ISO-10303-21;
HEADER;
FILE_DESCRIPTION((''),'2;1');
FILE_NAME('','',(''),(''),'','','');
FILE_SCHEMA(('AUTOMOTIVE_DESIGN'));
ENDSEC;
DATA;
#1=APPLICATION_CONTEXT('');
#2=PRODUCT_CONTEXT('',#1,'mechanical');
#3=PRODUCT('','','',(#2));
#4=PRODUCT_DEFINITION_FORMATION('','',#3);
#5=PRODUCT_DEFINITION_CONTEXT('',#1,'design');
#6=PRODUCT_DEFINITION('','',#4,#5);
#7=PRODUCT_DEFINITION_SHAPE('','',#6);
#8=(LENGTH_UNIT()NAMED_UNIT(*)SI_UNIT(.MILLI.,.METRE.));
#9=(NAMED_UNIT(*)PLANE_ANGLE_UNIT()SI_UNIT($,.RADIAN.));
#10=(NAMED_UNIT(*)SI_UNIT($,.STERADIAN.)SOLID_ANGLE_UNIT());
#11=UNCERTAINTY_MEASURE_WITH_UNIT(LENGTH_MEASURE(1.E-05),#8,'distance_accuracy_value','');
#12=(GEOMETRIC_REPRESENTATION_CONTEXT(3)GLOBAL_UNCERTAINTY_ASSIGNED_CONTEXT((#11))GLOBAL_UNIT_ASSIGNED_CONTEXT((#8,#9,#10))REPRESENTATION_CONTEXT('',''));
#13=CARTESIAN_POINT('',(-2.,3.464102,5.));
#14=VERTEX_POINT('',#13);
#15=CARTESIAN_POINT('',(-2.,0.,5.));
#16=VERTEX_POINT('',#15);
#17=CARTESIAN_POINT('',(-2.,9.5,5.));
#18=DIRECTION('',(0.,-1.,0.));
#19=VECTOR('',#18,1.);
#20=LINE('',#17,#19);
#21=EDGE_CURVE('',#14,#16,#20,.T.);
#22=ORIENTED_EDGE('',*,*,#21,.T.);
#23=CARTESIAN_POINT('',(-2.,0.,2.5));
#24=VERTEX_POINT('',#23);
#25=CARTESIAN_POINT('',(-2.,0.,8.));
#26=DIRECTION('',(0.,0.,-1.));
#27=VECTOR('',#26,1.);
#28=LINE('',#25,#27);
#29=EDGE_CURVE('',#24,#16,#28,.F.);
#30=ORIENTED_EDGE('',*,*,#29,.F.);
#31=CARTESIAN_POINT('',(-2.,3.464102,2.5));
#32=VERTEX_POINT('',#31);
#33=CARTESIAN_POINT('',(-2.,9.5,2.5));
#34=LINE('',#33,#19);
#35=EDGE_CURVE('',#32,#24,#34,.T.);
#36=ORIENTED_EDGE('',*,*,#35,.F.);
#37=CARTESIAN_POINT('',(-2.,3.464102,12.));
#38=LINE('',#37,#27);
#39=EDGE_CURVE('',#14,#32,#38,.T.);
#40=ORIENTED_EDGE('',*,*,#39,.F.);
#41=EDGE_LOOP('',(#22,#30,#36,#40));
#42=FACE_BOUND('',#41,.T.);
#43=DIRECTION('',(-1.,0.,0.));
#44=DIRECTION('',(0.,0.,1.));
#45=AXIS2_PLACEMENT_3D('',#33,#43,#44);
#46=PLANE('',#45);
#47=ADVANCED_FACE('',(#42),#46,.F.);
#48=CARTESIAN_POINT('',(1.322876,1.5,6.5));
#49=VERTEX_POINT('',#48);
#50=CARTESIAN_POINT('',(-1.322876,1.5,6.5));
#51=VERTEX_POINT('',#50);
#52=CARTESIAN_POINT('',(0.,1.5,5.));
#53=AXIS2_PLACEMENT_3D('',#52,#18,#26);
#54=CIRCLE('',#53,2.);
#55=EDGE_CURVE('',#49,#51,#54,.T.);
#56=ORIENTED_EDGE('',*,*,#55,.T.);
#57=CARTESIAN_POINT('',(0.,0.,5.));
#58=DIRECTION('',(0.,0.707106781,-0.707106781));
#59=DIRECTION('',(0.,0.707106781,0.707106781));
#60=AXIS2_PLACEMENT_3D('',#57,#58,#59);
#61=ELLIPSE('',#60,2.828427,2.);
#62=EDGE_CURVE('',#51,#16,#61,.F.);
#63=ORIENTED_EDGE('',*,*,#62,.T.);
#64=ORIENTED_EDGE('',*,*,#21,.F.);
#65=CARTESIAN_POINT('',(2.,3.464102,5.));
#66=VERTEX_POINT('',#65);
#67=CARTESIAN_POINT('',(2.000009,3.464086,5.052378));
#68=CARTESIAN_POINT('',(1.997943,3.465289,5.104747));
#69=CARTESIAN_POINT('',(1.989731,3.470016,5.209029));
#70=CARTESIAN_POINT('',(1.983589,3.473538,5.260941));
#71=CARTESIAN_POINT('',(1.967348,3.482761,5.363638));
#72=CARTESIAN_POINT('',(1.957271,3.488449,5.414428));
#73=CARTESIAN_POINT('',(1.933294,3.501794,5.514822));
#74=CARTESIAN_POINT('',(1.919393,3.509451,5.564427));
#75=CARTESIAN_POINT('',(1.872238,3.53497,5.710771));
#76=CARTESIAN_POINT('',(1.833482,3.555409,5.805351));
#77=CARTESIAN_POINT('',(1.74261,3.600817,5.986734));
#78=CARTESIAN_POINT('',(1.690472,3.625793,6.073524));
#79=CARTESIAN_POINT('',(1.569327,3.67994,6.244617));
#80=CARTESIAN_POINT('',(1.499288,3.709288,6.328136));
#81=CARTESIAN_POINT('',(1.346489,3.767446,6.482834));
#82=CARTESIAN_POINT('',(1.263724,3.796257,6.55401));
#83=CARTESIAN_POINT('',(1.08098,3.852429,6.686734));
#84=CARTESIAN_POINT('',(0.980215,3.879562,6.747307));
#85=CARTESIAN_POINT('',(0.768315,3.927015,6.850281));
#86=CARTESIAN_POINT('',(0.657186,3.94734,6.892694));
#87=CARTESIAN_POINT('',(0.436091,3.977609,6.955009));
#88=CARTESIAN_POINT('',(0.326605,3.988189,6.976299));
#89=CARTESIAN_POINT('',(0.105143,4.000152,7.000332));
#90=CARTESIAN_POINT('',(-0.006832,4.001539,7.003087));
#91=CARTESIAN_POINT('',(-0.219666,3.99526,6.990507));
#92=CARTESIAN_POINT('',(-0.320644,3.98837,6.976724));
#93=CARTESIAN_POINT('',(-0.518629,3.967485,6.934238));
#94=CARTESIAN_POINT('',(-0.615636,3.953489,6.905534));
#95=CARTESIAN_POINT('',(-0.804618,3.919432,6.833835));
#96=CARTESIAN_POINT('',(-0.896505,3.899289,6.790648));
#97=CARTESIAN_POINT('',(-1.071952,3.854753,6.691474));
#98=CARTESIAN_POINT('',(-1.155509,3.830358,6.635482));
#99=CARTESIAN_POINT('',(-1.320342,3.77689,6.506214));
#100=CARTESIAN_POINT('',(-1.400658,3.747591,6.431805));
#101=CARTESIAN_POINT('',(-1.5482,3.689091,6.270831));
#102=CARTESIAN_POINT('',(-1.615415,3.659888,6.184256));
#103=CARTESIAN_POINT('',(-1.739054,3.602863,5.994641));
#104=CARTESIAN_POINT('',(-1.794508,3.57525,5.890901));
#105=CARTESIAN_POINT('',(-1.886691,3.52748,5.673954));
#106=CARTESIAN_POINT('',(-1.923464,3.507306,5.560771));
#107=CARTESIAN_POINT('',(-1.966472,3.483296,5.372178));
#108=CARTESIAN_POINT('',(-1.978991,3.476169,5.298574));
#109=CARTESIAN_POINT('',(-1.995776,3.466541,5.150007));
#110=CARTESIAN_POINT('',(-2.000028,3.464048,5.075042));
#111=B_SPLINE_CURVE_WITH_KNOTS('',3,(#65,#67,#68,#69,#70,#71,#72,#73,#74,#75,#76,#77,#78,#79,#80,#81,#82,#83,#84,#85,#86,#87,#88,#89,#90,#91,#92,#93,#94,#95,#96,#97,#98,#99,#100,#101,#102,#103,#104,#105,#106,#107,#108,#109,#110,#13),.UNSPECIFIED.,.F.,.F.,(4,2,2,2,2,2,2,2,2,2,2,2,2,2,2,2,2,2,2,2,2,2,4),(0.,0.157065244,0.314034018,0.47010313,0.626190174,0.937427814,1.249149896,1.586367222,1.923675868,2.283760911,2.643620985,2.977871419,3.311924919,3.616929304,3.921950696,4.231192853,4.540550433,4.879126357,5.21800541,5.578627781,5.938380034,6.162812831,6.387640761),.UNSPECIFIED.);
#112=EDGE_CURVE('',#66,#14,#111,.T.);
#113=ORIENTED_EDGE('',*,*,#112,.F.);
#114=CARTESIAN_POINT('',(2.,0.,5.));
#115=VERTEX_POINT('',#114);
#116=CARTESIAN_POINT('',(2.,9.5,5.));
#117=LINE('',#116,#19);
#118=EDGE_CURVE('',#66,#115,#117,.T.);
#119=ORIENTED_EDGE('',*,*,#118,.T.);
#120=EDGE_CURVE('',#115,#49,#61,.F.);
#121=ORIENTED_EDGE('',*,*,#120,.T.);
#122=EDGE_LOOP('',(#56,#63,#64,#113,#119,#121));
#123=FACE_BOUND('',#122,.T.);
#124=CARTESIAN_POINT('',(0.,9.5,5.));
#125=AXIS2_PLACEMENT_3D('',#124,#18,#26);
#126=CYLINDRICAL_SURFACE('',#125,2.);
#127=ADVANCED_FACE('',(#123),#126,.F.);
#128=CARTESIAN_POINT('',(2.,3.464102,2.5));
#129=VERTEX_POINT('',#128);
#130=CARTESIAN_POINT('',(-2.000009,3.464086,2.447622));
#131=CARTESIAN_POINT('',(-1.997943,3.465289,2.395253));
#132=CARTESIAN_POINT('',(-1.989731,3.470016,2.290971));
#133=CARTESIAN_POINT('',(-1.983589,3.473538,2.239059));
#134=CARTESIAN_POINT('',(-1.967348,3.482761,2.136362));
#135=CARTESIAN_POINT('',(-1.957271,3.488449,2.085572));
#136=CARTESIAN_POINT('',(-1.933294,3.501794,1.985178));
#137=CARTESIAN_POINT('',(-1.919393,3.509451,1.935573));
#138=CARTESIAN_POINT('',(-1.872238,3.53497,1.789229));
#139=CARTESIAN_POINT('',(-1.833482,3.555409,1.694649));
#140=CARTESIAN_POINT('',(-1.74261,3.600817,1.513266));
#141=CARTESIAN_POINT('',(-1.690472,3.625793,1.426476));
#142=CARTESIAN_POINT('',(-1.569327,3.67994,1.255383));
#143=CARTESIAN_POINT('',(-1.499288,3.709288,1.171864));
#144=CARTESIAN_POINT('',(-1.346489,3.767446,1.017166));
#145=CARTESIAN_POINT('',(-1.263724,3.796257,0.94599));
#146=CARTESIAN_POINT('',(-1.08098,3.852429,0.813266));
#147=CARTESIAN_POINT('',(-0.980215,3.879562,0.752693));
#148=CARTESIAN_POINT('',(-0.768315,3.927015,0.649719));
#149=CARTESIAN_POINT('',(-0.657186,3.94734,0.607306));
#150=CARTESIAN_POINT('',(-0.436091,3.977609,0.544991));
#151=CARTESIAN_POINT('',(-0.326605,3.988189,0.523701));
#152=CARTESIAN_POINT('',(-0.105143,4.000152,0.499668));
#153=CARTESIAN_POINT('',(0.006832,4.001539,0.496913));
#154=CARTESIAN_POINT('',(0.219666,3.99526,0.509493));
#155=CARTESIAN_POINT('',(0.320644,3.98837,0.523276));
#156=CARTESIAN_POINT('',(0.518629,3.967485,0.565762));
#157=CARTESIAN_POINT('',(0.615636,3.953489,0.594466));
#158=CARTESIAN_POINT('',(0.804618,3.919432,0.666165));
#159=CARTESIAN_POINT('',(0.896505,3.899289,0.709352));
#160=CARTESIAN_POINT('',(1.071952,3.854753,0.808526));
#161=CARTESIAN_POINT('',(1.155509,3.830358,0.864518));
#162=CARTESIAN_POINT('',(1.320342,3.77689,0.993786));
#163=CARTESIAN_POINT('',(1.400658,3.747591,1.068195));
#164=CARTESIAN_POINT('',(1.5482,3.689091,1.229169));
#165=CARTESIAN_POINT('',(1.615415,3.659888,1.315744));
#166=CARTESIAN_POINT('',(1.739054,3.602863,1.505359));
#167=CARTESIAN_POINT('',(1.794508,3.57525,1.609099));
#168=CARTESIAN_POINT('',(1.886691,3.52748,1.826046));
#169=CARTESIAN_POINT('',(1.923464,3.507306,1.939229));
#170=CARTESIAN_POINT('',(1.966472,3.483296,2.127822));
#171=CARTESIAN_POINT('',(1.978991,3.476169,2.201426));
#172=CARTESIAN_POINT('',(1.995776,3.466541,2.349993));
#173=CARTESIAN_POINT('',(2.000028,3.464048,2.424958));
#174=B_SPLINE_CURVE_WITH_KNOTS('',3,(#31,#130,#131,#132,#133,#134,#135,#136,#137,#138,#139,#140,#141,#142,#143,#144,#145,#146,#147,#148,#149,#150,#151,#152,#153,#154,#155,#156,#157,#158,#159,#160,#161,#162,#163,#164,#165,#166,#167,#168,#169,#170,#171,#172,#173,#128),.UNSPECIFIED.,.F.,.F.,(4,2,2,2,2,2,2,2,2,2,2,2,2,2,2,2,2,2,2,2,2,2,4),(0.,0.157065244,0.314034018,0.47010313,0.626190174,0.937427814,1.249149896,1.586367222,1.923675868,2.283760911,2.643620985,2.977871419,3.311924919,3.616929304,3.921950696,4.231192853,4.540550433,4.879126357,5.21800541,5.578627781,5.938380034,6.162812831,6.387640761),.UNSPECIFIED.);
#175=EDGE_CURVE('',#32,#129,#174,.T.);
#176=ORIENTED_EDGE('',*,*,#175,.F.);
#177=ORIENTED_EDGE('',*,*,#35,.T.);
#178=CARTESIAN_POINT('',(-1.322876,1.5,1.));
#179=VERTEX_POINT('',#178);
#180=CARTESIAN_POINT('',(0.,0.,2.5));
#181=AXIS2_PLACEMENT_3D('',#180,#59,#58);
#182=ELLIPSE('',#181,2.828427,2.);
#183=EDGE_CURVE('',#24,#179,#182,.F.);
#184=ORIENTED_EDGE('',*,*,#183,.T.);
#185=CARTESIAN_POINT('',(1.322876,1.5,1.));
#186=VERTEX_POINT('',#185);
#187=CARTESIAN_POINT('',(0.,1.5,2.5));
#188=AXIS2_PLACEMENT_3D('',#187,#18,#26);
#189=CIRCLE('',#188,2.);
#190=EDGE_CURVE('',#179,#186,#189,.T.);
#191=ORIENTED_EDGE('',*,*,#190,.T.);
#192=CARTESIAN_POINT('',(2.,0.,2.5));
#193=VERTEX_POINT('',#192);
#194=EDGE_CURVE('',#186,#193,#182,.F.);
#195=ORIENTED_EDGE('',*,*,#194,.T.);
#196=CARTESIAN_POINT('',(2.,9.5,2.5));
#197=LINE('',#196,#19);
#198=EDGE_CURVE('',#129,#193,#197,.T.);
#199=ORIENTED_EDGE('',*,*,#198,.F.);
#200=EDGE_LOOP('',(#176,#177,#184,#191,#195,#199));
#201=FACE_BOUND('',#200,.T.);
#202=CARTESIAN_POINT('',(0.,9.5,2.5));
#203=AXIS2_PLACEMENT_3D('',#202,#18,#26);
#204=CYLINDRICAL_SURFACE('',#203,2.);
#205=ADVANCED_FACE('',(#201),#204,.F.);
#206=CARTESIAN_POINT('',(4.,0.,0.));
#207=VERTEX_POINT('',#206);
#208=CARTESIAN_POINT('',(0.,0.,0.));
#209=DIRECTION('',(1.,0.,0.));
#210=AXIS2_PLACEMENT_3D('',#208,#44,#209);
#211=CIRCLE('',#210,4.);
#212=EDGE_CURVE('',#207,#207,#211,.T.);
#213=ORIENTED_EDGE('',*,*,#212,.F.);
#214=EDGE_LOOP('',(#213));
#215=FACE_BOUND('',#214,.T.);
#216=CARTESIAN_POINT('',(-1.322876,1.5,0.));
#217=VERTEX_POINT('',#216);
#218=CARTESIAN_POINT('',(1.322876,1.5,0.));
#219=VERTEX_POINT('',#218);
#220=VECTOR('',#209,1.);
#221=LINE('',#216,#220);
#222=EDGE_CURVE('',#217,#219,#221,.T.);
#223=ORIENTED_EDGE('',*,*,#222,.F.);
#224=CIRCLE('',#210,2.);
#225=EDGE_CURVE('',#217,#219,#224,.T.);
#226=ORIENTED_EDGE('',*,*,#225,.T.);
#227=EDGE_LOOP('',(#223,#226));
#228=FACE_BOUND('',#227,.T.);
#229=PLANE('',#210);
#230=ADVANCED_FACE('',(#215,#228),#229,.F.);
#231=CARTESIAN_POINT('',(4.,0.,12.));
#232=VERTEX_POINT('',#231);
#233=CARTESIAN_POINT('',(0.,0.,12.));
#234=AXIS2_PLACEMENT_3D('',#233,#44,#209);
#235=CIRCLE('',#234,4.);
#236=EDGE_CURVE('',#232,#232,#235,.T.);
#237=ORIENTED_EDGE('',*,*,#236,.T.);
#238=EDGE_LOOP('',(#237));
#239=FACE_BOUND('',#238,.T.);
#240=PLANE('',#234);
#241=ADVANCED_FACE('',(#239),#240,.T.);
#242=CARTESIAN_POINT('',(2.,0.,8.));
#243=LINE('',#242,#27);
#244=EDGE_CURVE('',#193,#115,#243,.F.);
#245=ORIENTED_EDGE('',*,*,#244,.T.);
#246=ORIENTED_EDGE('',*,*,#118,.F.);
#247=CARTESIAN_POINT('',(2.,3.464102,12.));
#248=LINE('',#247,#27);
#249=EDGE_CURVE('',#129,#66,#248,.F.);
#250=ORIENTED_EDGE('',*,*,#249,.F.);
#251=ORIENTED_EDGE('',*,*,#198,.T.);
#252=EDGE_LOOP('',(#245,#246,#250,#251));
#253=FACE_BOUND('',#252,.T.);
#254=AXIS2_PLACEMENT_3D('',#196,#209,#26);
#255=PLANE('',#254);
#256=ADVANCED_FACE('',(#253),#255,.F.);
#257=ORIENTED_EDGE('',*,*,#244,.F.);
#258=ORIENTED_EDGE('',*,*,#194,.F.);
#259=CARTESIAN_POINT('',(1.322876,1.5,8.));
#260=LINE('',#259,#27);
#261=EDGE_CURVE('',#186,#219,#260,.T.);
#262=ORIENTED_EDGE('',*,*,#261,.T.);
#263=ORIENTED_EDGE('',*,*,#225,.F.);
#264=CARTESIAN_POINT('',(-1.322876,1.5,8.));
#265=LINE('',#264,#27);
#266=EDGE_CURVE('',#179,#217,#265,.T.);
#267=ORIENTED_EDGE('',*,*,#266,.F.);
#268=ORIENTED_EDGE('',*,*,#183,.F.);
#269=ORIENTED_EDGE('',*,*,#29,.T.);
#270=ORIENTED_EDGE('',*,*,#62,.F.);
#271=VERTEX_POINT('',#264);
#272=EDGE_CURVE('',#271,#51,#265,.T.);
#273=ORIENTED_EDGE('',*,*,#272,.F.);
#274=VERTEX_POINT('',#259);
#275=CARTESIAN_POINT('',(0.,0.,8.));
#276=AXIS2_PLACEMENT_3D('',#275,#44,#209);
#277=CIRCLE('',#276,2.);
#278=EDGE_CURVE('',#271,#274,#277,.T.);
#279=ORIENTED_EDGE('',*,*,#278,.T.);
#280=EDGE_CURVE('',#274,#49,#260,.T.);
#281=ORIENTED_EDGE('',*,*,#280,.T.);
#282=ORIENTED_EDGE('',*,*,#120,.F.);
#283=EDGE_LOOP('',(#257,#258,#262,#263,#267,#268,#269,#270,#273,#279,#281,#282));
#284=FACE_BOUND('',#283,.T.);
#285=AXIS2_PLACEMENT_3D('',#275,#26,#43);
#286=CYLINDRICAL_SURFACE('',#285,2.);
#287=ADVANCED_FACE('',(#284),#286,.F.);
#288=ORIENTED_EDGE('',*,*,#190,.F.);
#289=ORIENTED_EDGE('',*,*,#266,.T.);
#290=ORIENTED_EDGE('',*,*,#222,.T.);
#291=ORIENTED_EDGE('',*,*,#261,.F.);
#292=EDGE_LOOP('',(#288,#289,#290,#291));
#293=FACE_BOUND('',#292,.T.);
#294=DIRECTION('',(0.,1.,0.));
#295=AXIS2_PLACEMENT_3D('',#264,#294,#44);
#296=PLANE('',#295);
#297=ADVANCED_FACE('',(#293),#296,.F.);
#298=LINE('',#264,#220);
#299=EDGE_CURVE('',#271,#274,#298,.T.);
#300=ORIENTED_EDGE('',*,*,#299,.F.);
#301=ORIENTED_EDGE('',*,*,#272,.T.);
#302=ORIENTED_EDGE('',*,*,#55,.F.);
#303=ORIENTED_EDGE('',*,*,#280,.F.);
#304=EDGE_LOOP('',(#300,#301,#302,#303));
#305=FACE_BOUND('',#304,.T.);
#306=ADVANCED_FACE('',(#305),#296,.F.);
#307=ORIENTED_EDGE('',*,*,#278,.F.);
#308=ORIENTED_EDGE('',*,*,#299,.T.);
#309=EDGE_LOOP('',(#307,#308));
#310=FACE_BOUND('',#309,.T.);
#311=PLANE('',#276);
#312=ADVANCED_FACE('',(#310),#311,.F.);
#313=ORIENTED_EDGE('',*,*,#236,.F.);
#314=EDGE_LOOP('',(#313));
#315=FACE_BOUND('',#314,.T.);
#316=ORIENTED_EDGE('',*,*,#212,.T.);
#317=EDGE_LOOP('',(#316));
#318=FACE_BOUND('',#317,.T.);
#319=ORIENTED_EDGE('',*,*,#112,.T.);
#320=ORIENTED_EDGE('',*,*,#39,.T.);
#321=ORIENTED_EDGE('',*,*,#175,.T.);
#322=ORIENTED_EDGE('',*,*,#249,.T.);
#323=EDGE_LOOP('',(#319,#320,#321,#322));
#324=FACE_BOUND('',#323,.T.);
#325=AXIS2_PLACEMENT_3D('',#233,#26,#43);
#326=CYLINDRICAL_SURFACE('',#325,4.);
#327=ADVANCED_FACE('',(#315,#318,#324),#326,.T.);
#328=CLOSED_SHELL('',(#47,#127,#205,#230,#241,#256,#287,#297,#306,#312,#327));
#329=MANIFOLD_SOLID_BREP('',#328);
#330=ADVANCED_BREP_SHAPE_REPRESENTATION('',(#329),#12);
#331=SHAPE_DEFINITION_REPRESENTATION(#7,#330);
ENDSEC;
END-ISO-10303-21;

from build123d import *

# Parameters (mm, degrees)
CROQUIS1_R              = 4
SALIENTE_EXTRUIR1_DEPTH = 12
CORTAR_EXTRUIR2_DEPTH   = 8
CORTAR_EXTRUIR3_START   = -2.5000001
CORTAR_EXTRUIR3_DEPTH   = 4.0000001


# Read off the part's stored shape, not the designer's step: Cortar-Extruir3
with BuildPart() as part:
    # Croquis1 → Saliente-Extruir1 (new body)
    with BuildSketch(Plane.XY):
        Circle(CROQUIS1_R)
    extrude(amount=SALIENTE_EXTRUIR1_DEPTH)

    # Croquis1<5> → Cortar-Extruir2 (cut)
    with BuildSketch(Plane.XY):
        with BuildLine():
            Line((-1.322875656, 1.5), (1.322875656, 1.5))
            ThreePointArc((1.322875656, 1.5), (0, -2), (-1.322875656, 1.5))
        make_face()
    extrude(amount=CORTAR_EXTRUIR2_DEPTH, mode=Mode.SUBTRACT)

    # Cortar-Extruir3 outline → Cortar-Extruir3 (cut)
    with BuildSketch(Plane.XZ.offset(-1.5).offset(CORTAR_EXTRUIR3_START)):
        with BuildLine():
            ThreePointArc((2, 5), (0, 7), (-2, 5))
            Line((-2, 5), (-2, 2.5))
            ThreePointArc((-2, 2.5), (0, 0.5), (2, 2.5))
            Line((2, 2.5), (2, 5))
        make_face()
    extrude(amount=CORTAR_EXTRUIR3_DEPTH, mode=Mode.SUBTRACT)


solid = part.part
